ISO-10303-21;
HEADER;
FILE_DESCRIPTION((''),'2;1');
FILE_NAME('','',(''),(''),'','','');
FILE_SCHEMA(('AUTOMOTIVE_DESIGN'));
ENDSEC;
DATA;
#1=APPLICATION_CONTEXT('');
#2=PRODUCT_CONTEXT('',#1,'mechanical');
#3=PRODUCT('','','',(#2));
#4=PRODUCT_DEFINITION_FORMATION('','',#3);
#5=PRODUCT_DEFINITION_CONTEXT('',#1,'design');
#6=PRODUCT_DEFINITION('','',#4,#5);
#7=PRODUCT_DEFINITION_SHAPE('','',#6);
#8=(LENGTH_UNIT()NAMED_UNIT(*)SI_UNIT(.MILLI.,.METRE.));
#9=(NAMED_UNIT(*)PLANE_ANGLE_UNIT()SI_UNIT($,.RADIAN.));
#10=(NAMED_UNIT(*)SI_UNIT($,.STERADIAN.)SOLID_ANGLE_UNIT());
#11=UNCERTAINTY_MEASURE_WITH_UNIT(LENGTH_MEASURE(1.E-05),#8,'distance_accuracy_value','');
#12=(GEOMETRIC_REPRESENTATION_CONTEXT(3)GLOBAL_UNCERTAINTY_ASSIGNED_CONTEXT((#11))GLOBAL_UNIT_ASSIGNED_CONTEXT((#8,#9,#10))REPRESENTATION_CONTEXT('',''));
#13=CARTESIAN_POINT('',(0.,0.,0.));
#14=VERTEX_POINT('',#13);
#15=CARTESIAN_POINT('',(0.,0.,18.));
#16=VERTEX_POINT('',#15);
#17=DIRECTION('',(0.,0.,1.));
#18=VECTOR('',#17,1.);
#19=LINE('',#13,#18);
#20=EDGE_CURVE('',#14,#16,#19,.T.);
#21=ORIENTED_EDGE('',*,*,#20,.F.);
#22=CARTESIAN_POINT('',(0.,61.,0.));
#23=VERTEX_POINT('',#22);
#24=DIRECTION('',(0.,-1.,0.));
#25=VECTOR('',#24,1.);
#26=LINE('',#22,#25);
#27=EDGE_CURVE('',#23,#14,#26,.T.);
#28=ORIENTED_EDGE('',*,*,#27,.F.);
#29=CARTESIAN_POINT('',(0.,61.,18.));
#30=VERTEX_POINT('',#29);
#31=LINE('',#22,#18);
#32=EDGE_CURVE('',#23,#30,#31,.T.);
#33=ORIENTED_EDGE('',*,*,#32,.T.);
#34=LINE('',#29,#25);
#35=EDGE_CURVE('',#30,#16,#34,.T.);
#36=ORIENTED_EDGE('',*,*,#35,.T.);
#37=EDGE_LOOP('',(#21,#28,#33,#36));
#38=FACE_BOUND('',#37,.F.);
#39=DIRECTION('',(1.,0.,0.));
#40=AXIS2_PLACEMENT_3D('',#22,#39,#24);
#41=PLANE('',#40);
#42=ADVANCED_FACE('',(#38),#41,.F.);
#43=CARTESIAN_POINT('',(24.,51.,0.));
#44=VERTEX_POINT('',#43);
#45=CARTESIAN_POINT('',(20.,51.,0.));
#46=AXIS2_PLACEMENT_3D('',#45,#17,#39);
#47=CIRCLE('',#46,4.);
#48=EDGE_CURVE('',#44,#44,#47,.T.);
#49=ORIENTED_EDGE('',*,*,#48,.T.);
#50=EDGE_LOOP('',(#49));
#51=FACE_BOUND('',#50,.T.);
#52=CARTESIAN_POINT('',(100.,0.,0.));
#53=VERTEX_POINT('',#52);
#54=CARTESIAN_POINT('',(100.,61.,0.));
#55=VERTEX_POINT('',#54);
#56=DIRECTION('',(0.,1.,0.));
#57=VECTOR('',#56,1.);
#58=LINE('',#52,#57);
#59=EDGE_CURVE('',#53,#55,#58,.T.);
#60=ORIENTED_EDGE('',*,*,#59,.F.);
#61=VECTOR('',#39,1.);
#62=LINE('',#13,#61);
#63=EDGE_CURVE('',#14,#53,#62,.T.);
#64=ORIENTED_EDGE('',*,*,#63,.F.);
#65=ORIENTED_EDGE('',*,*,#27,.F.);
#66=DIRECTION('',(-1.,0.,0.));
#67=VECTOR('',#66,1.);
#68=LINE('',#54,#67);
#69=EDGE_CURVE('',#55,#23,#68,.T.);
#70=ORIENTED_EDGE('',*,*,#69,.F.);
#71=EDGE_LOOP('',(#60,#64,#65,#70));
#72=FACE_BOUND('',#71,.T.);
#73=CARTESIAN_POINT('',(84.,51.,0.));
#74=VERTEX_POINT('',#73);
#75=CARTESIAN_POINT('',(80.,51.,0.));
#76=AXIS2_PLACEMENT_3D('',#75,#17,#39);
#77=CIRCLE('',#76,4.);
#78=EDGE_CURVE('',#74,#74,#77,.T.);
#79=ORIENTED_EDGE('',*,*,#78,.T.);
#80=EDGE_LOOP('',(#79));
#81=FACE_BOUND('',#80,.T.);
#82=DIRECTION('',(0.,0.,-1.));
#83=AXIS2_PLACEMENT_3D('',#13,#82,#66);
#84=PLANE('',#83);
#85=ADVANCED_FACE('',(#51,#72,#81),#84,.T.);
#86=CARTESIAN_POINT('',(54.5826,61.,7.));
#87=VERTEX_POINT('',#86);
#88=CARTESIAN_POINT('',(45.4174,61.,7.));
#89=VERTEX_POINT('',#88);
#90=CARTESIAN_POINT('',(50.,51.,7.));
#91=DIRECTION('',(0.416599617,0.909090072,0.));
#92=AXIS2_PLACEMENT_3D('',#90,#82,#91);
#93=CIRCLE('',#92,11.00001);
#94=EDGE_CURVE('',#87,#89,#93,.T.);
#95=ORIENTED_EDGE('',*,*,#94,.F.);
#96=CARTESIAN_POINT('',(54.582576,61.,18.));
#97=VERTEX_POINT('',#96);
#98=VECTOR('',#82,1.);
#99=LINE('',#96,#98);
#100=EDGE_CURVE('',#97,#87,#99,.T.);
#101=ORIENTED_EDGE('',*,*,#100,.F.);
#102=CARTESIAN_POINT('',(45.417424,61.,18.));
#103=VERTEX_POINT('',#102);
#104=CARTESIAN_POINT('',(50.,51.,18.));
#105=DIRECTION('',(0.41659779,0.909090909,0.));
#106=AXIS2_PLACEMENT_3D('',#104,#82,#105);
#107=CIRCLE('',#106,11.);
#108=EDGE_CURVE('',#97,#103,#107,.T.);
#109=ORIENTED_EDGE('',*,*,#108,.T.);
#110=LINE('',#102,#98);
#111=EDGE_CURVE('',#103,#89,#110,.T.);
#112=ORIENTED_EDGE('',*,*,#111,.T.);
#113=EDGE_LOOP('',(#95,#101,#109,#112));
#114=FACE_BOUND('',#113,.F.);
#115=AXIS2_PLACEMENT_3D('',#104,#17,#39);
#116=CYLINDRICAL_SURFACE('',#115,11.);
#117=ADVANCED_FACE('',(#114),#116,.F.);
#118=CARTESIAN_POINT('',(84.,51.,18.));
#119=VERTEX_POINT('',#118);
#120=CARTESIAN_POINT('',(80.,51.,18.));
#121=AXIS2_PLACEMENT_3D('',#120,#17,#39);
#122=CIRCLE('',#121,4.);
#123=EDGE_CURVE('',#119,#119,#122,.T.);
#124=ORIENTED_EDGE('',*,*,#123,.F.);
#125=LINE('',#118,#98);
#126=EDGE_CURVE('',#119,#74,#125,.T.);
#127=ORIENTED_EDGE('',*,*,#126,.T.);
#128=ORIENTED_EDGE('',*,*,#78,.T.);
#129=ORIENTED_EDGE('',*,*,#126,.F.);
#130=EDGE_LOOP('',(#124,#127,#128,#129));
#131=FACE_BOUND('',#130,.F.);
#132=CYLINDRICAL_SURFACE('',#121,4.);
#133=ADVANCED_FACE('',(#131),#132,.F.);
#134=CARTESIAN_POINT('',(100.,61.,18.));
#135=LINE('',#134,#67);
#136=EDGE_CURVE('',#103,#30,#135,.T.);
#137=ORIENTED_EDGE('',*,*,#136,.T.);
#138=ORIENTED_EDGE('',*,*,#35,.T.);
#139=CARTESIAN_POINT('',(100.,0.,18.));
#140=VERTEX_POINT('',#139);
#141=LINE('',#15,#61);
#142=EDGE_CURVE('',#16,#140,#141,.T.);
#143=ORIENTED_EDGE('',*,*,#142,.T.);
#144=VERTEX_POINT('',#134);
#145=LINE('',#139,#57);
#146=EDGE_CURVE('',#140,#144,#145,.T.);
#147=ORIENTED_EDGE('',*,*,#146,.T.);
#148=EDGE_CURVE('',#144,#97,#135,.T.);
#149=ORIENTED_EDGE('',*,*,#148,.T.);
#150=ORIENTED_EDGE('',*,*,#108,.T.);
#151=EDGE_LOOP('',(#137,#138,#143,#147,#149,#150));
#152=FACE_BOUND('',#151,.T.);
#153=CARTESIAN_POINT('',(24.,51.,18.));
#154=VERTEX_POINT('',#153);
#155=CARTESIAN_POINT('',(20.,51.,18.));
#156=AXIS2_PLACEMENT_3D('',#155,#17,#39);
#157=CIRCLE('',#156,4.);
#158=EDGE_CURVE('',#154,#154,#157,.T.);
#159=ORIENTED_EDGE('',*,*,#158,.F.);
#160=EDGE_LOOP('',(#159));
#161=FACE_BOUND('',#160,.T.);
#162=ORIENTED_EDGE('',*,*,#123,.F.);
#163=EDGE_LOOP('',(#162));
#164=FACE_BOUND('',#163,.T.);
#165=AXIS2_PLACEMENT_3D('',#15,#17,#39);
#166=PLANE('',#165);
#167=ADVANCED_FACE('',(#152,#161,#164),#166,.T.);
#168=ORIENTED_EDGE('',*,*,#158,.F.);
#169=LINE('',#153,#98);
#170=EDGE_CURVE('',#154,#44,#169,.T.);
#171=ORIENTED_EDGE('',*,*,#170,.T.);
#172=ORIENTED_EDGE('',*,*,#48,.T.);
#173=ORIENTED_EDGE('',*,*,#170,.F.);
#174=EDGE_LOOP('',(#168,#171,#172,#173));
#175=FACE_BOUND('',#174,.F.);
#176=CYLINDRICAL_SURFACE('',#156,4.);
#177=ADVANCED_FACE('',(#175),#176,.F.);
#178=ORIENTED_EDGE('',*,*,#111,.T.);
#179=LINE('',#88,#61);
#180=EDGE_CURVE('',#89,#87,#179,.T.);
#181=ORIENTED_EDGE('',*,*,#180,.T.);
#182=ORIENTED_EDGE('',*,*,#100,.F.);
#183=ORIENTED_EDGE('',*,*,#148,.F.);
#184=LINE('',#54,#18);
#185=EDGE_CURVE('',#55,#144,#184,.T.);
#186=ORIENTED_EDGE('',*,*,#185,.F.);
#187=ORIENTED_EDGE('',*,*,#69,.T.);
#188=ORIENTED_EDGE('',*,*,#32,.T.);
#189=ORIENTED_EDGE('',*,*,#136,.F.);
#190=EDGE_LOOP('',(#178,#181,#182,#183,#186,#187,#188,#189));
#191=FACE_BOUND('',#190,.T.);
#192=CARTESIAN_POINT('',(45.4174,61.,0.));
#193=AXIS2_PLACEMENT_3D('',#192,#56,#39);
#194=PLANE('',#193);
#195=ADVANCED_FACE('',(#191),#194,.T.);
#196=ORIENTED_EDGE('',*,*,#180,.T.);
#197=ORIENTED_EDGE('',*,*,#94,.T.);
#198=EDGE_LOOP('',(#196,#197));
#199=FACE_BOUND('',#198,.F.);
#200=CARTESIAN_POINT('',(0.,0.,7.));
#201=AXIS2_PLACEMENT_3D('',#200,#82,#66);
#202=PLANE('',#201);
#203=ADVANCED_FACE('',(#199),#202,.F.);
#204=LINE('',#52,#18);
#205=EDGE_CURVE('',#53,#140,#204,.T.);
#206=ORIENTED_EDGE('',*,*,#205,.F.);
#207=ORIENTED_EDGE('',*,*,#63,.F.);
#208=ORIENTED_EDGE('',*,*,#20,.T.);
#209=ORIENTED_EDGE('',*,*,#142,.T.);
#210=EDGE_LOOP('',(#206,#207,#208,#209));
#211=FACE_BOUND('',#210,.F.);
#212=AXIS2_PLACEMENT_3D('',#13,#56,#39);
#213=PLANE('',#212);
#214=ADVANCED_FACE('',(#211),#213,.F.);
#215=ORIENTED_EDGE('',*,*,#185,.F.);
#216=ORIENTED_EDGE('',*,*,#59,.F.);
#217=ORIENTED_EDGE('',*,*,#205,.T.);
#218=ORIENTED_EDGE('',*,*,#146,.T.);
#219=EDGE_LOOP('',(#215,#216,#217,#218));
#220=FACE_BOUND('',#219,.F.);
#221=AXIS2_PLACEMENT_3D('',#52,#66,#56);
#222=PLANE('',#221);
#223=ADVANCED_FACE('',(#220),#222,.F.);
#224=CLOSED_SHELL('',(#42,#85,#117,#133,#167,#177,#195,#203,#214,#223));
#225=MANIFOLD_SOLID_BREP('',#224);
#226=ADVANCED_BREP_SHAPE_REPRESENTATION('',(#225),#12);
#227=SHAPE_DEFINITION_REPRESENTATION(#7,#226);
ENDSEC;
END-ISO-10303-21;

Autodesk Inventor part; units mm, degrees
ref_plane "YZ Plane" through (0, 0, 0) normal (1, 0, 0) x (0, 1, 0)
ref_plane "XZ Plane" through (0, 0, 0) normal (0, 1, 0) x (-1, 0, 0)
ref_plane "XY Plane" through (0, 0, 0) normal (0, 0, 1) x (1, 0, 0)
sketch "Boceto1" plane through (0, 0, 0) normal (0, 0, 1) x (1, 0, 0)
  line L0 (0, 0) -> (100, 0)
  line L1 (100, 0) -> (100, 61)
  line L2 (100, 61) -> (0, 61)
  line L3 (0, 61) -> (0, 0)
  dimension "d0" = 61
  dimension "d1" = 100
extrude "Extrusión1" add sketch "Boceto1" along normal blind 18
sketch "Boceto2" plane through (0, 0, 18) normal (0, 0, 1) x (1, 0, 0)
  circle A0 centre (50, 51) radius 11
  line L0 (0, 61) -> (0, 0) projected
  line L1 (100, 61) -> (0, 61) projected
  line L2 (50, 51) -> (20, 51) construction
  circle A1 centre (20, 51) radius 4
  line L3 (50, 51) -> (50, 22.8333) construction
  circle A2 centre (80, 51) radius 4
  circle A3 centre (29.5218, 59.04) radius 1.5
  circle A4 centre (50, 51) radius 22 construction
  line L4 (29.5218, 59.04) -> (50, 51) construction
  line L5 (50, 51) -> (78.6691, 39.7442) construction
  circle A5 centre (70.4782, 42.96) radius 1.5
  line L6 (50, 51) -> (39.4009, 24.0037) construction
  circle A6 centre (41.96, 30.5218) radius 1.5
  point P0 (54.5826, 61)
  point P1 (45.4174, 61)
  dimension "d4" = 22
  dimension "d5" = 50
  dimension "d6" = 10
  dimension "d7" = 8
  dimension "d8" = 30
  dimension "d9" = 3
  dimension "d10" = 1.96
  dimension "d11" = 44
  dimension "d12" = 3
  dimension "d13" = 90
  dimension "d14" = 3
extrude "Extrusión2" cut sketch "Boceto2" against normal blind 18 contours A0 L1 | A1 | A2 | A3 | A6 picked at (46.6624, 53.5107)
sketch "Boceto3" plane through (0, 0, 18) normal (0, 0, 1) x (1, 0, 0)
  point P0 (0, 0)
sketch "Boceto4" plane through (0, 0, 0) normal (0, 0, -1) x (-1, 0, 0)
  arc A0 (-54.5826, 61) -> (-45.4174, 61) centre (-50, 51) ccw projected
  arc A1 (-54.5826, 61) -> (-45.4174, 61) centre (-50, 51) ccw
  circle A2 centre (-41.96, 30.5218) radius 1.5 projected
  circle A3 centre (-41.96, 30.5218) radius 1.5
  circle A4 centre (-29.5218, 59.04) radius 1.5 projected
  circle A5 centre (-29.5218, 59.04) radius 1.5
  line L0 (-45.4174, 61) -> (0, 61) projected
  line L1 (-45.4174, 61) -> (-54.5826, 61)
  point P0 (0, 0)
extrude "Extrusión3" add sketch "Boceto4" against normal blind 7 contours L1 A0
sketch "Boceto5" plane through (0, 0, 18) normal (0, 0, 1) x (1, 0, 0)
  circle A0 centre (29.5218, 59.04) radius 1.5 projected
  circle A1 centre (29.5218, 59.04) radius 1.5
  circle A2 centre (41.96, 30.5218) radius 1.5 projected
  circle A3 centre (41.96, 30.5218) radius 1.5
  point P0 (0, 0)
extrude "Extrusión4" add sketch "Boceto5" against normal up to surface (18 mm away)
properties part number "013" material "CFRP"
